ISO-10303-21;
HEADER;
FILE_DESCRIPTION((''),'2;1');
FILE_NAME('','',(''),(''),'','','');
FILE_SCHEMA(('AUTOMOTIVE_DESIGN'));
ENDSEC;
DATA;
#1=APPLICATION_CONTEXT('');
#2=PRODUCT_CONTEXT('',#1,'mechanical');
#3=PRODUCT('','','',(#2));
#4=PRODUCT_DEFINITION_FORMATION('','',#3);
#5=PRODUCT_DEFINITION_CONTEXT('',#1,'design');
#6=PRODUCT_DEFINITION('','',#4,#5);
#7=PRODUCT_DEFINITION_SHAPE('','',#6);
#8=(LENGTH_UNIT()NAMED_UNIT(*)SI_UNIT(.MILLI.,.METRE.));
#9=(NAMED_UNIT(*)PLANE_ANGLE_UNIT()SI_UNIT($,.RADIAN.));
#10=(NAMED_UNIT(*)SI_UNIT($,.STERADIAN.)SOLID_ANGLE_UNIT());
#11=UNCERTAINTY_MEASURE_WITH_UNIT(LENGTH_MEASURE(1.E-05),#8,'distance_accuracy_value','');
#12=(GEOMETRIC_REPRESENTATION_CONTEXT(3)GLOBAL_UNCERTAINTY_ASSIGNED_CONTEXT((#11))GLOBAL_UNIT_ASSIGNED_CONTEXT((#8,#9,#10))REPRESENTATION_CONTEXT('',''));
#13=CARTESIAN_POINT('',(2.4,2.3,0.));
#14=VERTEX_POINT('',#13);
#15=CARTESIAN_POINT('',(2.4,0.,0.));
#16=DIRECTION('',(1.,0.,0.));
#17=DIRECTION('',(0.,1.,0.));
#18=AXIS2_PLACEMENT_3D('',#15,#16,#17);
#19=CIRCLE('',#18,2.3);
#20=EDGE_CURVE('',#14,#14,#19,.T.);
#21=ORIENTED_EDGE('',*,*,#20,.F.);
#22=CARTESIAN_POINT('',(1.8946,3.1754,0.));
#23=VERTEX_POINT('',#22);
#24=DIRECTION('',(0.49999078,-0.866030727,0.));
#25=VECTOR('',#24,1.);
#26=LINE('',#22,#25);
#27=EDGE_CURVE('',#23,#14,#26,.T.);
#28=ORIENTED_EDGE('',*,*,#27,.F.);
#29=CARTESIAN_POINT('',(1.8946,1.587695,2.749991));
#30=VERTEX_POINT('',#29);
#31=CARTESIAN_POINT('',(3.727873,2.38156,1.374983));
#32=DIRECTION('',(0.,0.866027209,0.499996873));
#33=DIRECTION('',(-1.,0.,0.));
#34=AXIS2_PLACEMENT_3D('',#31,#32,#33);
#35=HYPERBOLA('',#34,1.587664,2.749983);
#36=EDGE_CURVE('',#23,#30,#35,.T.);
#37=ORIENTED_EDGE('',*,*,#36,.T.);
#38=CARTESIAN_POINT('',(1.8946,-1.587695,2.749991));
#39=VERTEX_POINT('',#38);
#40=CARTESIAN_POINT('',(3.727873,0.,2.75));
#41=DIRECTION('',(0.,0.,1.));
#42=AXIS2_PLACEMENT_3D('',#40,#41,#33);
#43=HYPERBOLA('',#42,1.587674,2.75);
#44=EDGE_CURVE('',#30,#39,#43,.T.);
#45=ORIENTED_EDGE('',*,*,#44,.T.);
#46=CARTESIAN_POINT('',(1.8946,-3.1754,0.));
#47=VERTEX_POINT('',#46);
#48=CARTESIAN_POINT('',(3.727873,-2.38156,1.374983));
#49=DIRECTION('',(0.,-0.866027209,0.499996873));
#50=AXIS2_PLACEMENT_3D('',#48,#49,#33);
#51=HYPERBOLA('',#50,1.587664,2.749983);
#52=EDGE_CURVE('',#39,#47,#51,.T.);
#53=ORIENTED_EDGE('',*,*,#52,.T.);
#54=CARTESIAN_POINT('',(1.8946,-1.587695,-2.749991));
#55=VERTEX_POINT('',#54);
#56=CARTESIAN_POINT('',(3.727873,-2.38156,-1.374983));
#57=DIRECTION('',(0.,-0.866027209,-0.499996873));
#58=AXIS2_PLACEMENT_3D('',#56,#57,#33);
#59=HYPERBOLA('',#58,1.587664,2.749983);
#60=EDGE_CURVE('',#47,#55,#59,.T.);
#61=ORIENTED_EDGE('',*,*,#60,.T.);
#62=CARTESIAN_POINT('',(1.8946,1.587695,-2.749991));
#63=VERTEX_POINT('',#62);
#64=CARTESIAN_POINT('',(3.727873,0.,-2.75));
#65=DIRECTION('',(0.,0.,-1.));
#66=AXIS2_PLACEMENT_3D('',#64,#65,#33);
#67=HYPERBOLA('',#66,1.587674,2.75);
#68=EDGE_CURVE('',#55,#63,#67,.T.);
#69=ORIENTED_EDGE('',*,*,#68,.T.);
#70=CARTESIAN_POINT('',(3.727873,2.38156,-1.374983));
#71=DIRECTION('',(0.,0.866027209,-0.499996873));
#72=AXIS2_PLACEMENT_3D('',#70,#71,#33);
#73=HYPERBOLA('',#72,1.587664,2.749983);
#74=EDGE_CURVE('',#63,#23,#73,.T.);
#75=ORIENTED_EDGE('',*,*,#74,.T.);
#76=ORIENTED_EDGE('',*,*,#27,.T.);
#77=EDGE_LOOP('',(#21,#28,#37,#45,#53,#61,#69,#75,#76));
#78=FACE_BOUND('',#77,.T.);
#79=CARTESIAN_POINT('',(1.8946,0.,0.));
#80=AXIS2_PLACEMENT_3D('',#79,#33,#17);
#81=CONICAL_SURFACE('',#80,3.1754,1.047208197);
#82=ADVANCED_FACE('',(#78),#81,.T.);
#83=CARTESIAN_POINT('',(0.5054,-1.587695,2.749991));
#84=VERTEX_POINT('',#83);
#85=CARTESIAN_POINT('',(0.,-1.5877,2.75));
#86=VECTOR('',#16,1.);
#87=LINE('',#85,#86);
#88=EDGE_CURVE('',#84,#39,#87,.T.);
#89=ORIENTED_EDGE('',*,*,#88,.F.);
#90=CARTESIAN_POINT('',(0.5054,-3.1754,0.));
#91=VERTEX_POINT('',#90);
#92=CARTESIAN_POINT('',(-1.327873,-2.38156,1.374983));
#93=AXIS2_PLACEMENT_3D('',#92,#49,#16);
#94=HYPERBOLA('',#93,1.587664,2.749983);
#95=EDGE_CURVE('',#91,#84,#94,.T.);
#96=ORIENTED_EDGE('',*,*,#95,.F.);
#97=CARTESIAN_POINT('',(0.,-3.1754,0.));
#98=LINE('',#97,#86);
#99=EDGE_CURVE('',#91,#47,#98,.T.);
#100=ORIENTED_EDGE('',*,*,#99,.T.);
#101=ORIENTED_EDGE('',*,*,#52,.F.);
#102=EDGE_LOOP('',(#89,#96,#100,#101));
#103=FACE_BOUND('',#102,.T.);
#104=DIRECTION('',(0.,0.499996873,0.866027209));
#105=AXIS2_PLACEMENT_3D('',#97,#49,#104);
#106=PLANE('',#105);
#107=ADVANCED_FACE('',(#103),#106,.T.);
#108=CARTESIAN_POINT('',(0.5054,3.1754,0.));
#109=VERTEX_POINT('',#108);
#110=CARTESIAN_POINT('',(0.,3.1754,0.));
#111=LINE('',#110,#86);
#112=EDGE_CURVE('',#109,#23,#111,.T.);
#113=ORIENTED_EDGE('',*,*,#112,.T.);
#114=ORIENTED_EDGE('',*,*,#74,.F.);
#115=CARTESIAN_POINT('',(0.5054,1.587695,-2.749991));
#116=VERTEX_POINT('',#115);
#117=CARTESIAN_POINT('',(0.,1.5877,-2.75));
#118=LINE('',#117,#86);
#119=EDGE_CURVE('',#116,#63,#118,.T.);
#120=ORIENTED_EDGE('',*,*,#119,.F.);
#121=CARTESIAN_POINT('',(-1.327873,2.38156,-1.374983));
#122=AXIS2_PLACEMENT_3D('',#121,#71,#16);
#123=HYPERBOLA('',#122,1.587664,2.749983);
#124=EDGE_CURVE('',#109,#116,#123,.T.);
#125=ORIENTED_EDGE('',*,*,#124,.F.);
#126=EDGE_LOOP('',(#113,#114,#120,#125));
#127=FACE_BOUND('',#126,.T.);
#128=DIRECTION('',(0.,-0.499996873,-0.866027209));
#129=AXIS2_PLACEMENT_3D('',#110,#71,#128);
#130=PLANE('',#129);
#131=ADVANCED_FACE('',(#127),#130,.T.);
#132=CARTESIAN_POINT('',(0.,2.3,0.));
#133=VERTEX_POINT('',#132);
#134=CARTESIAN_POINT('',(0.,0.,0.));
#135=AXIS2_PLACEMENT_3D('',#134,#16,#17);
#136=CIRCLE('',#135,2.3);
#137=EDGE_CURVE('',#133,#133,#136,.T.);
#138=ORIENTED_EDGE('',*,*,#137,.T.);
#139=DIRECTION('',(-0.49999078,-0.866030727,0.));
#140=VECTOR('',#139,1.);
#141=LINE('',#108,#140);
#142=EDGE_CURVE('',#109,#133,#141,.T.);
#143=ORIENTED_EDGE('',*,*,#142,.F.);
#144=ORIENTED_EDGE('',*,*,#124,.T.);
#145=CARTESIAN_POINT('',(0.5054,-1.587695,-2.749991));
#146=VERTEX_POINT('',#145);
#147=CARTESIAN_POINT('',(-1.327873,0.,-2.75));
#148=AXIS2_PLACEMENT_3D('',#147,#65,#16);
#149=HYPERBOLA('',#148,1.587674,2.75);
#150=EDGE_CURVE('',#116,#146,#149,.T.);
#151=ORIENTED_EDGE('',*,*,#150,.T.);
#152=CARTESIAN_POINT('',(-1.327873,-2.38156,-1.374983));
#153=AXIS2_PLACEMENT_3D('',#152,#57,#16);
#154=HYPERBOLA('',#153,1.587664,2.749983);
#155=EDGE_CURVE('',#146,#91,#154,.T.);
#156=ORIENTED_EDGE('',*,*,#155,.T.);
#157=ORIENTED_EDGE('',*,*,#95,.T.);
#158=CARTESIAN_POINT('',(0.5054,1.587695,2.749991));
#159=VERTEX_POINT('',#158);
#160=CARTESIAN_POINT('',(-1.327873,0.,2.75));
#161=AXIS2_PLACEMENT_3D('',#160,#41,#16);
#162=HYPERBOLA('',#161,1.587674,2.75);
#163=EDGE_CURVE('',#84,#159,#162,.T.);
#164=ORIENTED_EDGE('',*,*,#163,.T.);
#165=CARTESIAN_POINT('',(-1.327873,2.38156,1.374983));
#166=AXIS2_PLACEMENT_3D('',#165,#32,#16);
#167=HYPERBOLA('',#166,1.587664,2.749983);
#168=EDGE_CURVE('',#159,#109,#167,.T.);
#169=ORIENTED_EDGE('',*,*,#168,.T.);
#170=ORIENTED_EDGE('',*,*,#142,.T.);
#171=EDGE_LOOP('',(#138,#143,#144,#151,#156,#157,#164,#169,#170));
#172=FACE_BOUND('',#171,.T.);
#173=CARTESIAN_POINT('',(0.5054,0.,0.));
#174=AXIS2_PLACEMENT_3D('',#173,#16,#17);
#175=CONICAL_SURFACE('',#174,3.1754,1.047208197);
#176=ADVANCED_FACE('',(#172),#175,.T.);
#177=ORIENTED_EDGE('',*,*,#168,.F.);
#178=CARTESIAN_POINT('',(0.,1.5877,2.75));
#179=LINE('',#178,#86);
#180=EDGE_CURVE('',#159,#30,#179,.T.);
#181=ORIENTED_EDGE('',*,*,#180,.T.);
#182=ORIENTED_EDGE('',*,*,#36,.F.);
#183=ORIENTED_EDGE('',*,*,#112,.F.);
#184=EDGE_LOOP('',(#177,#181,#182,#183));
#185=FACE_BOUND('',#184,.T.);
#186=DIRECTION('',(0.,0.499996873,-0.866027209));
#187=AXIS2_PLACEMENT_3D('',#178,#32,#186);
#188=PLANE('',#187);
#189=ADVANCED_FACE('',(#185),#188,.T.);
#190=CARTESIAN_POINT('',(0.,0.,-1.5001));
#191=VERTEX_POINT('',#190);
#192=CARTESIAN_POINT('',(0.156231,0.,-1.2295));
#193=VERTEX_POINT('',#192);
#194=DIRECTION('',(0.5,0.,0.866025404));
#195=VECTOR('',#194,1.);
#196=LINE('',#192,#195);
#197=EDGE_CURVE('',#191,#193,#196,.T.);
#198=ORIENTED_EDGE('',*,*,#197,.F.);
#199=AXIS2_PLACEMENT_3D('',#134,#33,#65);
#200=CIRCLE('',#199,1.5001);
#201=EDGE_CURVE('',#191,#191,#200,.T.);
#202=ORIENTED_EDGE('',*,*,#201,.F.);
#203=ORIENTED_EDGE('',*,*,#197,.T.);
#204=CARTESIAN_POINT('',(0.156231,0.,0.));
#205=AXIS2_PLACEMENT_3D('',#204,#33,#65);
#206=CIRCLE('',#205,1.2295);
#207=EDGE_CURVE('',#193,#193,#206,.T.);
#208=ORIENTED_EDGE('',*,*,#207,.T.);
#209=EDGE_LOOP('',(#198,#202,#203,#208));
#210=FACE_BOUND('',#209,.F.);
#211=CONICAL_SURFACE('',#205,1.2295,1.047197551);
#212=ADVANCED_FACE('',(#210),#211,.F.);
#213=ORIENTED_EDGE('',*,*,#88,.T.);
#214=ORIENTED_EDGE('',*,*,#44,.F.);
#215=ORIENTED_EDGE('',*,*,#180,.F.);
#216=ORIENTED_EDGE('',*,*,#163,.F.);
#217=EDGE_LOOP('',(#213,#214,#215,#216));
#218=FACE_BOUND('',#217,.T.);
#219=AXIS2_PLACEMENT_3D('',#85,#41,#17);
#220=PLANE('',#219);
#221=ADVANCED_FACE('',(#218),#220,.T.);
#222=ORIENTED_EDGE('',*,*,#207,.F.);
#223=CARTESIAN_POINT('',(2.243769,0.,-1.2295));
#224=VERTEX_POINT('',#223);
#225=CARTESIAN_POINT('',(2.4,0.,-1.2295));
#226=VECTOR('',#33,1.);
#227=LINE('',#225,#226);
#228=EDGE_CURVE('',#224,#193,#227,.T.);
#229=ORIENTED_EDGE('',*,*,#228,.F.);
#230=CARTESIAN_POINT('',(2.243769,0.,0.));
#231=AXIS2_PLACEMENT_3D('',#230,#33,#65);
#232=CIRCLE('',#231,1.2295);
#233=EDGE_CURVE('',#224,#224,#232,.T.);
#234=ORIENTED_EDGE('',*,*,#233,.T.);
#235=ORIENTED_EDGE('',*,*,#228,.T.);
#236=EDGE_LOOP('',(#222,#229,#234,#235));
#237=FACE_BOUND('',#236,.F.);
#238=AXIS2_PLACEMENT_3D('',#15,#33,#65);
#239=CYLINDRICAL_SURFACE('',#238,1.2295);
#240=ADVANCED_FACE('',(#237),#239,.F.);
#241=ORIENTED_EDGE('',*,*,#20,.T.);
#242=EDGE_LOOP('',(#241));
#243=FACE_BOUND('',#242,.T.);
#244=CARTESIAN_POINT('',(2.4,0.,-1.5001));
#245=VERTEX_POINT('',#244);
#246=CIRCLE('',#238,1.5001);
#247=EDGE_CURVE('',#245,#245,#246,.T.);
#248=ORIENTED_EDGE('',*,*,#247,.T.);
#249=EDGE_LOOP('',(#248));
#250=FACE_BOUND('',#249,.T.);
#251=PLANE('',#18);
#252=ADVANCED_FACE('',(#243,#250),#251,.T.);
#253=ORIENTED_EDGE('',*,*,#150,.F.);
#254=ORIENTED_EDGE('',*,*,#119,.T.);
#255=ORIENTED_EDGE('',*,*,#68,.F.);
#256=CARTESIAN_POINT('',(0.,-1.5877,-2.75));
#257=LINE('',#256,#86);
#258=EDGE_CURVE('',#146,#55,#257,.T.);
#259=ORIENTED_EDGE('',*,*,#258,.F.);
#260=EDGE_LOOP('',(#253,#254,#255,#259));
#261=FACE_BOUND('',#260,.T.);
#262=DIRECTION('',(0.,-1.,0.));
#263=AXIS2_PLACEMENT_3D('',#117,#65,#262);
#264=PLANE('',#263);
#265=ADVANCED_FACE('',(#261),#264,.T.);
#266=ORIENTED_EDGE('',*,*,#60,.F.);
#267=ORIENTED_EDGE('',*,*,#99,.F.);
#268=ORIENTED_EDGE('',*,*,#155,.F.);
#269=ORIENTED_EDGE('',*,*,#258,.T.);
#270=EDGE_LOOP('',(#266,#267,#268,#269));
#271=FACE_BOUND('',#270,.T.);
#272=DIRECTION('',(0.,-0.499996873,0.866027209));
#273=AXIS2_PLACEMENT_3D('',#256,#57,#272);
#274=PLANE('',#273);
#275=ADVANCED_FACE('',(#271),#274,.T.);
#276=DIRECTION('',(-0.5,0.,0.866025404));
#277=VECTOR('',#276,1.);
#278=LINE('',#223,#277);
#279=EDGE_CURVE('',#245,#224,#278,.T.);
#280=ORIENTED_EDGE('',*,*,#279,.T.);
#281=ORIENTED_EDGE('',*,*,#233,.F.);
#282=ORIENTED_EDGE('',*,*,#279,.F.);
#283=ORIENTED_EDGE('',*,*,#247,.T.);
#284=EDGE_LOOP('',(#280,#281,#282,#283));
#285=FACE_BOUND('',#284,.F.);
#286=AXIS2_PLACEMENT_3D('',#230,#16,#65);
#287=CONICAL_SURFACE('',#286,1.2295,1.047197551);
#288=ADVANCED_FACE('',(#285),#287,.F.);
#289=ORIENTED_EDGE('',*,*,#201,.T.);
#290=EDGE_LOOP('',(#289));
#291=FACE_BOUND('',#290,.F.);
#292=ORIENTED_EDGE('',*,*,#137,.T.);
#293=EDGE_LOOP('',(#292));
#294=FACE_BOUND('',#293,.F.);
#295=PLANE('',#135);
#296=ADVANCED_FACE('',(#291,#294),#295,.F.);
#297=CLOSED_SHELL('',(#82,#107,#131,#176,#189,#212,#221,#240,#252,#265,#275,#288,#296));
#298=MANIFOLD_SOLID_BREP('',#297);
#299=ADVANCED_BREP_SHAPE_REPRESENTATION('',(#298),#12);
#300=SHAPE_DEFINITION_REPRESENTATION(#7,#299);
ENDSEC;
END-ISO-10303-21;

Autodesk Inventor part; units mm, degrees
ref_plane "YZ Plane" through (0, 0, 0) normal (1, 0, 0) x (0, 1, 0)
ref_plane "XZ Plane" through (0, 0, 0) normal (0, 1, 0) x (-1, 0, 0)
sketch "Sketch1" plane through (0, 0, 0) normal (1, 0, 0) x (0, 1, 0)
  line L0 (-3.1754, 0) -> (-1.5877, 2.75)
  line L1 (-1.5877, 2.75) -> (1.5877, 2.75)
  line L2 (1.5877, 2.75) -> (3.1754, 0)
  line L3 (3.1754, 0) -> (1.5877, -2.75)
  line L4 (1.5877, -2.75) -> (-1.5877, -2.75)
  line L5 (-1.5877, -2.75) -> (-3.1754, 0)
  point P0 (0, 0)
  point P1 (0, 0)
  dimension "d0" = 6.3509
extrude "Body" add sketch "Sketch1" along normal blind 2.4
sketch "Sketch2" plane through (0, 0, 0) normal (0, 0, 1) x (1, 0, 0)
  line L0 (0, 1.5877) -> (0, 3.1754) projected
  line L1 (0, 3.1754) -> (2.4, 3.1754) projected
  line L2 (2.4, 1.5877) -> (2.4, 3.1754) projected
  line L3 (-0.48, 0) -> (2.88, 0) projected
  line L4 (0.5054, 3.1754) -> (0, 2.3)
  line L5 (1.8946, 3.1754) -> (2.4, 2.3)
  dimension "d3" = 30
  dimension "d4" = 30
  dimension "d5" = 4.6
  dimension "d6" = 4.6
revolve "Chamfer1" cut sketch "Sketch2" angle 360 about axis through (-10, 0, 0) along (1, 0, 0)
sketch "Sketch3" plane through (2.4, 0, 0) normal (1, 0, 0) x (0, 0, -1)
  arc A0 (-0.625, -1.0825) -> (0.625, -1.0825) centre (0, 0) ccw projected
hole "Thread" at (2.4, 0, 0) direction (-1, 0, 0) diameter 2.459 end through all thread size "M3x0.5" class "6H" standard "ISO Metric profile"
chamfer "Chamfer2" distance 0.2706 angle 30 1 edges at (2.4, 0, 1.2295) measured on face at (2.4, 1.9179, -0.2329)
chamfer "Chamfer3" distance 0.2706 angle 30 1 edges at (0, 0, 1.2295) measured on face at (0, 1.9179, -0.2329)
ref_plane "Work Plane1" through (-6.3375, 0, 0) normal (0, -0.8660254, -0.5) x (1, 0, 0)
equation "\"d0\" = 1.1547 * SW"
equation "\"d1\" = KOH"
equation "\"d8\" = -0.5 * GD1 + 0.5 * NND"
equation "\"d40\" = -0.5 * GD1 + 0.5 * NND"
equation "\"d10\" = -0.5 * GD1 + 0.5 * NND"
equation "\"d41\" = -0.5 * GD1 + 0.5 * NND"
equation "\"d3\" = ANG1"
equation "\"d4\" = ANG2"
equation "\"d5\" = SW0"
equation "\"d6\" = SW01"
equation "\"ANG1\" = 30deg"
equation "\"ANG2\" = 30deg"
equation "\"NND\" = 3"
equation "\"KOH\" = 2.4"
equation "\"SW\" = 5.5"
equation "\"SW0\" = 4.6"
equation "\"SW01\" = 4.6"
equation "\"GUL\" = 0.541266 * PTC"
equation "\"THREADDIA\" = 3"
equation "\"TOA\" = 30deg"
equation "\"PTC\" = 0.5"
equation "\"E0\" = 1.155 * SW"
equation "\"GAL\" = 0.541266 * PTC"
equation "\"GD1\" = 2.458734"
properties part number "ISO 4032 - M3" material "Stainless Steel, 440C"
